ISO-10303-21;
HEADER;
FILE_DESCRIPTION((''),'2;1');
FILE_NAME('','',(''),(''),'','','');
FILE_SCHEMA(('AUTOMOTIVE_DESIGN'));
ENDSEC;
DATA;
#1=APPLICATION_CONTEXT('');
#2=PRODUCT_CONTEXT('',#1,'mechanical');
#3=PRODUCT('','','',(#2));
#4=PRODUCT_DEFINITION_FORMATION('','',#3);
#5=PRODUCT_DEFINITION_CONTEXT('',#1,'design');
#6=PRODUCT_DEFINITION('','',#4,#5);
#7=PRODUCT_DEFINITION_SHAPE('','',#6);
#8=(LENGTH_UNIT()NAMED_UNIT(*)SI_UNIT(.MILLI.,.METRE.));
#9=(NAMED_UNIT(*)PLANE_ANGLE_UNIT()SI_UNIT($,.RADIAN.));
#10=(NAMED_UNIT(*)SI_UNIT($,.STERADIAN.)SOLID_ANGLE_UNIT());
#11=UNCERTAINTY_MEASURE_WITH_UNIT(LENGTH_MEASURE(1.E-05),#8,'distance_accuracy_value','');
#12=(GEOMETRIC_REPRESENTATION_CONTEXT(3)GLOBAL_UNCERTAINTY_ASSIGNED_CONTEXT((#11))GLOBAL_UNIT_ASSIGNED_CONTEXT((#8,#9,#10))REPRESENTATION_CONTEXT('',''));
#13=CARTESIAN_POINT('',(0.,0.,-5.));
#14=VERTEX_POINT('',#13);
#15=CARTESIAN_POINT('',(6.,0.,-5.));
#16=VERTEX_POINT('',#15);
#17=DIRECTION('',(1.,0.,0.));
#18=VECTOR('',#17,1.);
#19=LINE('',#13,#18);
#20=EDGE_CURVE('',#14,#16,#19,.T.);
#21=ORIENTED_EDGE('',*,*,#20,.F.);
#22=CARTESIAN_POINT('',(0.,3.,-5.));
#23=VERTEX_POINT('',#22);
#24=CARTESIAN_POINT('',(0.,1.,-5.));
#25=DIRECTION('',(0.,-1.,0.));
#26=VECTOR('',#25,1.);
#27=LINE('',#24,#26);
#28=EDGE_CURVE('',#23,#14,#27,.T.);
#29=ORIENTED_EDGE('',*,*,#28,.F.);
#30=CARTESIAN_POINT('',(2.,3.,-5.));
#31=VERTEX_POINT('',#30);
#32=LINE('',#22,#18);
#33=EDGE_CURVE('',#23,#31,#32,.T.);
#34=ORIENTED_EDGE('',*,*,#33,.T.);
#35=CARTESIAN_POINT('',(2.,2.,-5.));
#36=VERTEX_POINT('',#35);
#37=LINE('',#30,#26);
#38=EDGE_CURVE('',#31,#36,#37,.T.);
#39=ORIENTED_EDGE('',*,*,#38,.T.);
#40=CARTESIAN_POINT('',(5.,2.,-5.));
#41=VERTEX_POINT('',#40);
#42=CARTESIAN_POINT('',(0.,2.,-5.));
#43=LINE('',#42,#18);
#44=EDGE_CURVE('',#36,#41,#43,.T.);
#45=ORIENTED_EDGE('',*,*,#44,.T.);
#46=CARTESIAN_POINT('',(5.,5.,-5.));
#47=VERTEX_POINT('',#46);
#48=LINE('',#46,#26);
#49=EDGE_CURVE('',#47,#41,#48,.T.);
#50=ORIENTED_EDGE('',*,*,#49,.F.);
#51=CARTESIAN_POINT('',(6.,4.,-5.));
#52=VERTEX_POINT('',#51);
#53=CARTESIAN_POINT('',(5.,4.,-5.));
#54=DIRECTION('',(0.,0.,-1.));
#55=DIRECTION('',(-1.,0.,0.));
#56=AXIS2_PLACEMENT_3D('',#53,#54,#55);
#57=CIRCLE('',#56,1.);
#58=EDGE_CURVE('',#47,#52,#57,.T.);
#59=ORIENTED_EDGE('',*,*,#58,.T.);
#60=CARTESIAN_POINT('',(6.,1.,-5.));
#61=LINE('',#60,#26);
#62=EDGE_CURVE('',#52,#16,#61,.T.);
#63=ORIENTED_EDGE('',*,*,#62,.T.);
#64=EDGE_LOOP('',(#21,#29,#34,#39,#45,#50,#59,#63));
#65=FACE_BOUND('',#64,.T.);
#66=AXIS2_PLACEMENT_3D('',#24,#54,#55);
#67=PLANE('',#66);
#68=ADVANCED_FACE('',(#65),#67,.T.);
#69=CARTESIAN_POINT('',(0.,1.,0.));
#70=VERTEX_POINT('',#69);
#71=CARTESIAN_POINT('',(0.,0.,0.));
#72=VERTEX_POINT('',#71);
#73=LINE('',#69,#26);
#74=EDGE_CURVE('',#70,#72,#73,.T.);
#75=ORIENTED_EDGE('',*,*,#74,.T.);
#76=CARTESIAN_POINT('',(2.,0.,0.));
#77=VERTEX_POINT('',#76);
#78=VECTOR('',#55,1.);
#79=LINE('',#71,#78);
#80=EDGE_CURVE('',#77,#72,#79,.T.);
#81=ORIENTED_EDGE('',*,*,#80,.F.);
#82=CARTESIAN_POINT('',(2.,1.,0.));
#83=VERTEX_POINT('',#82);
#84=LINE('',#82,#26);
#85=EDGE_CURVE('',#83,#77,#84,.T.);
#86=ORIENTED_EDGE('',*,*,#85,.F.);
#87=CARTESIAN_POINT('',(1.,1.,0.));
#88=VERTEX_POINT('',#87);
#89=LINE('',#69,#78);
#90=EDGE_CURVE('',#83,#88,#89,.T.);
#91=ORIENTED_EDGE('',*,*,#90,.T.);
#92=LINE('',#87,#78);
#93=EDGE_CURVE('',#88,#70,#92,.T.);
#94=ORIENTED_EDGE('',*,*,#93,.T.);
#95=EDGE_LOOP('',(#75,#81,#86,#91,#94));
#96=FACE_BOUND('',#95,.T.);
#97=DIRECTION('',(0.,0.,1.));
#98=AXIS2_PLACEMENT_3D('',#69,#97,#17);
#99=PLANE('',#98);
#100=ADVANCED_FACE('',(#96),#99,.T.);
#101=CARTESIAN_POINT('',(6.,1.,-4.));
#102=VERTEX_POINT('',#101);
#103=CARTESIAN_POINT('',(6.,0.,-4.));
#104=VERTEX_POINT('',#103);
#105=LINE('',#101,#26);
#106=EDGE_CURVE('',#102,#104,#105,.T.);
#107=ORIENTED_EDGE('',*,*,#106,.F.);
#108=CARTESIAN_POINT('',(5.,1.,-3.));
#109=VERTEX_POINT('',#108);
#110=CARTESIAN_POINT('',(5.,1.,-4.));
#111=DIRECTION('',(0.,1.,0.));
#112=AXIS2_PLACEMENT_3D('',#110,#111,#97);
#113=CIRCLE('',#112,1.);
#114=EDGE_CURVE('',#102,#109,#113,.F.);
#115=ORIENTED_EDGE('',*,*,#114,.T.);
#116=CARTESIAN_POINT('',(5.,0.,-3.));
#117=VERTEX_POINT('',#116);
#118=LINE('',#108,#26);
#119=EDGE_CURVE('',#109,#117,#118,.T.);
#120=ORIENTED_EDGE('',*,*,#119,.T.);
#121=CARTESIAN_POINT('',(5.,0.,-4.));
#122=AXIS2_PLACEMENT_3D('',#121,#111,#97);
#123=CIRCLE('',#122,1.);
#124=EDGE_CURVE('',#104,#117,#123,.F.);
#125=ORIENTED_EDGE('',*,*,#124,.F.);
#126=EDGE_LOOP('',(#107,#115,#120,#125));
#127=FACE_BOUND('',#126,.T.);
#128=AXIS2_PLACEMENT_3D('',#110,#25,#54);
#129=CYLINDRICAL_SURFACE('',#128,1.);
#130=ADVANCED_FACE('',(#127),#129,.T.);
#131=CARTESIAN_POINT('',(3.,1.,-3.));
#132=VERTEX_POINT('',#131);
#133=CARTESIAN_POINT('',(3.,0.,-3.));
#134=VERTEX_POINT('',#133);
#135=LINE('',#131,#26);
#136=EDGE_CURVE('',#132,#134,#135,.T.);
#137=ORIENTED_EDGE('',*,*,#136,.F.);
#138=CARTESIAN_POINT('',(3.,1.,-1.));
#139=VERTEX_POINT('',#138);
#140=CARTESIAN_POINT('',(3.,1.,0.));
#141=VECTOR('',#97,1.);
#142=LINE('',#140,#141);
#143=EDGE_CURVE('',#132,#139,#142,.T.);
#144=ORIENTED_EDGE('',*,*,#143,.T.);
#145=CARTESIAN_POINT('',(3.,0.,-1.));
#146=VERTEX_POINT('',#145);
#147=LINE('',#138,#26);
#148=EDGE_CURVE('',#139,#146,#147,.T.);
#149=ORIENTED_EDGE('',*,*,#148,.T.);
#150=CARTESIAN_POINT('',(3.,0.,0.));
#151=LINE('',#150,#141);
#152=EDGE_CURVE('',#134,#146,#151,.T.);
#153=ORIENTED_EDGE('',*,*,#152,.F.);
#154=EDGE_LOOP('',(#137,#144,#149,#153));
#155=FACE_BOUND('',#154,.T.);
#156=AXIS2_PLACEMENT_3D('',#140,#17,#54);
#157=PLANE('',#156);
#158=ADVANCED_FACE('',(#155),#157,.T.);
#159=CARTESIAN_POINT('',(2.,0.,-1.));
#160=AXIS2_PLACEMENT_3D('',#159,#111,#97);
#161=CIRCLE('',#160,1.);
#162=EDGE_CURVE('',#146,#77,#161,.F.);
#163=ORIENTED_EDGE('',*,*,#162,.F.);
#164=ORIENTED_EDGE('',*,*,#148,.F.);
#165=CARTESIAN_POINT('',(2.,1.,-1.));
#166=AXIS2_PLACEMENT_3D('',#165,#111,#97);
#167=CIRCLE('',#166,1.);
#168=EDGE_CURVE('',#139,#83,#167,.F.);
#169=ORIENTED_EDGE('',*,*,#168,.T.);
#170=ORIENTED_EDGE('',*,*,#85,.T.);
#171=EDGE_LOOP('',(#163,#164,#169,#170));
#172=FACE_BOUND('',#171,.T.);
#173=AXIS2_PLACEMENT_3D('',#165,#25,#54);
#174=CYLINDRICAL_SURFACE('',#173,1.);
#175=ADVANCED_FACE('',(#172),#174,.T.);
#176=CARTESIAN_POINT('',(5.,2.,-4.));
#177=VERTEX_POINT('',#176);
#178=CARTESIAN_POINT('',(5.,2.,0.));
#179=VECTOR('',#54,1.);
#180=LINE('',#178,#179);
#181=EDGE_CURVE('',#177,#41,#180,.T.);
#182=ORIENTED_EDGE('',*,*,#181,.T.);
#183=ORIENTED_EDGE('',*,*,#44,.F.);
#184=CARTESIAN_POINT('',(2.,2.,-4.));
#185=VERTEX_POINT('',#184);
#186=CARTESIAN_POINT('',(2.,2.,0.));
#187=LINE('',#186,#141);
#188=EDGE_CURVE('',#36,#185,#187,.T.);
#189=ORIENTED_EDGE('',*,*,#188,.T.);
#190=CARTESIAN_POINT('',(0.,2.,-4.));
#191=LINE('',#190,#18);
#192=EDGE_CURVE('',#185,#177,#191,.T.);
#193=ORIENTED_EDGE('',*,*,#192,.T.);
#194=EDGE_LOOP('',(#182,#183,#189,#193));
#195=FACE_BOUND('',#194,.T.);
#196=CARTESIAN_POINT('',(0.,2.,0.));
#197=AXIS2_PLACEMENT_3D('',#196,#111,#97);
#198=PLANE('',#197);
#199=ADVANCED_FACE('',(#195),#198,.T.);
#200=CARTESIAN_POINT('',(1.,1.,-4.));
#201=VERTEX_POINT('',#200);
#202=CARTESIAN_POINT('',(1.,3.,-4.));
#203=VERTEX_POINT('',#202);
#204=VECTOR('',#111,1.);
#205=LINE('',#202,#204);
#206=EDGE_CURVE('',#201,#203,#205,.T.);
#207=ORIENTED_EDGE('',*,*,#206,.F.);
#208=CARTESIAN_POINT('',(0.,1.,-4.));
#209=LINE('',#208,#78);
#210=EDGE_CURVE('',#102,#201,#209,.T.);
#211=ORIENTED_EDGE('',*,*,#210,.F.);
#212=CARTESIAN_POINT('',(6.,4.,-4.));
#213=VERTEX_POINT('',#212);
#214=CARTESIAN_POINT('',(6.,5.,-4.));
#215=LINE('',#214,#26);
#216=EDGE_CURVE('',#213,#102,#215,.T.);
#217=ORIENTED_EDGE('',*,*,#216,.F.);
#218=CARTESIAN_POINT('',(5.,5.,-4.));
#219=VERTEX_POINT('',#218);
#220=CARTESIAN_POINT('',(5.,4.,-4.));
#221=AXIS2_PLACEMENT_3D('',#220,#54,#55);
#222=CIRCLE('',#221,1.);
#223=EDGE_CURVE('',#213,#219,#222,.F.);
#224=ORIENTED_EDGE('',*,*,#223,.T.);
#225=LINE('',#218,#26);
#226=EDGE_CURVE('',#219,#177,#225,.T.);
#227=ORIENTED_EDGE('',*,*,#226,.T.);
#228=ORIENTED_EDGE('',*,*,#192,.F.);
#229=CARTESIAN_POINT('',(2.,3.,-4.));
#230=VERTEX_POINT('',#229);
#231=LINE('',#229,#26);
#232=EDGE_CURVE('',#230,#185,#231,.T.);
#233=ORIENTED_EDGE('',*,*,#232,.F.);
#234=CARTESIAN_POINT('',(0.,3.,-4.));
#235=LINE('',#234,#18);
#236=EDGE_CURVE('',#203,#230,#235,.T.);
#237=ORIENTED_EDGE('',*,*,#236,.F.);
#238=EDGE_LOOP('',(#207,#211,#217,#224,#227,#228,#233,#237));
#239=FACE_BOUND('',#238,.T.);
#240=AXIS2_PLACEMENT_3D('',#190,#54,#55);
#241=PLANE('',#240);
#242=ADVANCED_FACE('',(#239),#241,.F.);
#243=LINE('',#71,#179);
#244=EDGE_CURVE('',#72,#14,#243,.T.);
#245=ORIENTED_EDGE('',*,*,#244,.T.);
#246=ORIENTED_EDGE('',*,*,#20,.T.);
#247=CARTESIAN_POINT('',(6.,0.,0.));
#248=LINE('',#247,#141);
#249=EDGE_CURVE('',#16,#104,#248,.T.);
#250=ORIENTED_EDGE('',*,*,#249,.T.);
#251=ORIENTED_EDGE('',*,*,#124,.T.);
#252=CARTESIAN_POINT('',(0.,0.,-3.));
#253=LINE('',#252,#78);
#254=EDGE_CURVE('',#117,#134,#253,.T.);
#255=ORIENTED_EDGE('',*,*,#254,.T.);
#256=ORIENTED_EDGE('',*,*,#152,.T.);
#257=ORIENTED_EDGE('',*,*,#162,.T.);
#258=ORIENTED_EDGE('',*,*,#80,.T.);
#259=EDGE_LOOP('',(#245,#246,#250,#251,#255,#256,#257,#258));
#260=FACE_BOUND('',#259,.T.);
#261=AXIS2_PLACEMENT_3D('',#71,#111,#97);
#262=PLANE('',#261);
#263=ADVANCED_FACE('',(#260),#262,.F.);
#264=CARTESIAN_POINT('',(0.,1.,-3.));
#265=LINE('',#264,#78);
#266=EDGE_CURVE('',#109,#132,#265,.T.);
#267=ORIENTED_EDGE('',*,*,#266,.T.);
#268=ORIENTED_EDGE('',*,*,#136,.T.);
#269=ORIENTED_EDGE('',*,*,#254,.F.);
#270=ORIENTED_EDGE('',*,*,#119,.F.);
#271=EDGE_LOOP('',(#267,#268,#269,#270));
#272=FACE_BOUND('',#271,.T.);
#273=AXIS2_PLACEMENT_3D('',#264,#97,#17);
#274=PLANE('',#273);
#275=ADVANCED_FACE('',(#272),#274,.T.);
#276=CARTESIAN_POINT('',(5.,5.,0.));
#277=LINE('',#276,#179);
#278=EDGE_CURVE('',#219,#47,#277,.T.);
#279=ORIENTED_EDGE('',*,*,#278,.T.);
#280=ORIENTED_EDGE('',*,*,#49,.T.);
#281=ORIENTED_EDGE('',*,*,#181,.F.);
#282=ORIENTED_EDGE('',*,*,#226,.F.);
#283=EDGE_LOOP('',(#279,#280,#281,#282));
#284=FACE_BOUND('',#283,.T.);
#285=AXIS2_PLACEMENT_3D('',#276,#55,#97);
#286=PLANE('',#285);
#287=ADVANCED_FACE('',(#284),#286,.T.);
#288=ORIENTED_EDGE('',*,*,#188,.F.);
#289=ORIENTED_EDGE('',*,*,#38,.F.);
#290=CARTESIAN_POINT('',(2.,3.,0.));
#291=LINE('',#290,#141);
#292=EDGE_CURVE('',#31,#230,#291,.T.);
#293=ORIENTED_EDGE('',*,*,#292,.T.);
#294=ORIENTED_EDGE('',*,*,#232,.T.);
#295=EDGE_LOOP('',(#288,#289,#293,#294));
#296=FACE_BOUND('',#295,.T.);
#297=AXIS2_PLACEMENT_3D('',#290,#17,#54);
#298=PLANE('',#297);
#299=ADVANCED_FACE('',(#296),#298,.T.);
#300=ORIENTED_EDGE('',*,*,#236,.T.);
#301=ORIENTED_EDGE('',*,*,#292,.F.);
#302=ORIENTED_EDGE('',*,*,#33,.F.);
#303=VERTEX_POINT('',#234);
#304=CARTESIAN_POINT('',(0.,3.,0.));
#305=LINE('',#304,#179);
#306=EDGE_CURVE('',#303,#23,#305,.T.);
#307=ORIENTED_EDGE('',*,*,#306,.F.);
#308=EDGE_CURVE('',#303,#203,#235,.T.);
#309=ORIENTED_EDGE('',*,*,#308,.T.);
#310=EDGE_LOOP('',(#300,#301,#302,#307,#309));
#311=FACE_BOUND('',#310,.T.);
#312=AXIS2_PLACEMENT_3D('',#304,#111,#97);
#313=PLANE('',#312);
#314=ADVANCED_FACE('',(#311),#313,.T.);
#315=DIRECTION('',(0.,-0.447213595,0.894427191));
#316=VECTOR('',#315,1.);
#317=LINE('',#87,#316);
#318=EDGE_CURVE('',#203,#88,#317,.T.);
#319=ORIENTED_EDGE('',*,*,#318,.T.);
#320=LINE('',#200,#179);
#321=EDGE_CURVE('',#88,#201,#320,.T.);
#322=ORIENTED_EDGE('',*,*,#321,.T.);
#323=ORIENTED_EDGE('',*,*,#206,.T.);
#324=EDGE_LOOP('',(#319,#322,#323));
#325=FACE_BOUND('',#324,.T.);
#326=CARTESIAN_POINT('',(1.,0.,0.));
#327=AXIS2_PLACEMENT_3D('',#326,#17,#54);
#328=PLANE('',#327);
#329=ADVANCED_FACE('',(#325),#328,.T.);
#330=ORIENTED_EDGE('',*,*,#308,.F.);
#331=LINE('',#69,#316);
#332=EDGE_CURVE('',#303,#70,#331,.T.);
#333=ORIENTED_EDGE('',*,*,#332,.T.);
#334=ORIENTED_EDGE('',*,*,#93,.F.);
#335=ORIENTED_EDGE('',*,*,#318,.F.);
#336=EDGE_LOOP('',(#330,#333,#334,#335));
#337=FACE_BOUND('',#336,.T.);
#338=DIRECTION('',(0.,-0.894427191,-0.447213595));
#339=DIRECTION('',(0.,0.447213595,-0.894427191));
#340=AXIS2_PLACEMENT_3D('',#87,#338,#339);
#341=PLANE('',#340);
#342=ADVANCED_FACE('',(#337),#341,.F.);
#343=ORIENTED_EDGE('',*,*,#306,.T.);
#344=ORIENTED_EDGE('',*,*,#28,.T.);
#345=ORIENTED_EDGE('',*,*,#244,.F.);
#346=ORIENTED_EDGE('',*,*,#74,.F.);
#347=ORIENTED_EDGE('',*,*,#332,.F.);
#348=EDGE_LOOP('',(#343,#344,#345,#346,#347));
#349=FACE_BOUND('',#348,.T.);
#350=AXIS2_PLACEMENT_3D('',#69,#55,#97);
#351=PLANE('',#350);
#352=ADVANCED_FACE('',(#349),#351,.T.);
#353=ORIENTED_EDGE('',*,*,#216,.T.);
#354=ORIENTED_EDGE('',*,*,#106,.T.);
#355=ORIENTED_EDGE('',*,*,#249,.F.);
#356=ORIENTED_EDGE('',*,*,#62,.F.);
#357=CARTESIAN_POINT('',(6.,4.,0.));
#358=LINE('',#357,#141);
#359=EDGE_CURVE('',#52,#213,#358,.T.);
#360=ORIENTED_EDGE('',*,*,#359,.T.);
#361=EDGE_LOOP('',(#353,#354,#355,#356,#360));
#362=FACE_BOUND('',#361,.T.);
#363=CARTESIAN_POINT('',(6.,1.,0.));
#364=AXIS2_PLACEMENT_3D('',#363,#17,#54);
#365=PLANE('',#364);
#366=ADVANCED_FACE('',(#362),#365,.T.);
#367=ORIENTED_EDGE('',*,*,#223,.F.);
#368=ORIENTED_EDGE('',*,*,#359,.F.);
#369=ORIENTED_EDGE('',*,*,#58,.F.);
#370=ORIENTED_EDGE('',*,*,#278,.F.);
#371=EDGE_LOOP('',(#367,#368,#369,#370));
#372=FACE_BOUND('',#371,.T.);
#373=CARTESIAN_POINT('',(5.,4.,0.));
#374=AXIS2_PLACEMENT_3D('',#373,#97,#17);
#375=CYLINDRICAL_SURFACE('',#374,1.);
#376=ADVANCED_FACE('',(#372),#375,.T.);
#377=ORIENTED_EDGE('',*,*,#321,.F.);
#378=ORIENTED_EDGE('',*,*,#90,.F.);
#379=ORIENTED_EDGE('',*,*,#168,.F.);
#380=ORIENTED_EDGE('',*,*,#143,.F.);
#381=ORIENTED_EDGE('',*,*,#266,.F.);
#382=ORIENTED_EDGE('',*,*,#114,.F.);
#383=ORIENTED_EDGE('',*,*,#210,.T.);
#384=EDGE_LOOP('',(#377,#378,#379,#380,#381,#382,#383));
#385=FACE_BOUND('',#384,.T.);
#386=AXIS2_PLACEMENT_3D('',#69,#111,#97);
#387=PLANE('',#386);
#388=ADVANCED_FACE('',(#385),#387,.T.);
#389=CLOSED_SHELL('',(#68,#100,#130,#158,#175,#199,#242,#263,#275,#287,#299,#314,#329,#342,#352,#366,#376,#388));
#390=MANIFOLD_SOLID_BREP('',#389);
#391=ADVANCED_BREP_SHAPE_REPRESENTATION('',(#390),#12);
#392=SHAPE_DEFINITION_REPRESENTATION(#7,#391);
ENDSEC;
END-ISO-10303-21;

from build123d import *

# Parameters (mm, degrees)
SKETCH_1_W      = 2
SKETCH_1_H      = 1
SKETCH_1_W_2    = 3
SKETCH_1_W_3    = 1
EXTRUDE_1_DEPTH = 1
SKETCH_1_3_W    = 3
SKETCH_1_3_H    = 1
EXTRUDE_2_DEPTH = 2
SKETCH_1_4_W    = 2
SKETCH_1_4_H    = 1
EXTRUDE_3_DEPTH = 3
SKETCH_1_5_W    = 1
SKETCH_1_5_H    = 1
EXTRUDE_4_DEPTH = 5
FILLET_1_R      = 1
EXTRUDE_5_DEPTH = 1


with BuildPart() as part:
    # 草圖1 → 填料-伸長1 (new body)
    with BuildSketch(Plane(origin=(0, 0, 0), x_dir=(1, 0, 0), z_dir=(0, 1, 0))):
        with Locations((1, 4.5)):
            Rectangle(SKETCH_1_W, SKETCH_1_H)
        with BuildLine():
            Line((0, 4), (0, 0))
            Line((0, 0), (2, 0))
            ThreePointArc((2, 0), (2.707106781, 0.292893219), (3, 1))
            Line((3, 1), (3, 3))
            Line((3, 3), (5, 3))
            ThreePointArc((5, 3), (5.707106781, 3.292893219), (6, 4))
            Line((6, 4), (5, 4))
            Line((5, 4), (2, 4))
            Line((2, 4), (0, 4))
        make_face()
        with Locations((3.5, 4.5)):
            Rectangle(SKETCH_1_W_2, SKETCH_1_H)
        with Locations((5.5, 4.5)):
            Rectangle(SKETCH_1_W_3, SKETCH_1_H)
    extrude(amount=EXTRUDE_1_DEPTH)

    # 草圖1<3> → 填料-伸長2 (add)
    with BuildSketch(Plane(origin=(0, 0, 0), x_dir=(1, 0, 0), z_dir=(0, 1, 0))):
        with Locations((3.5, 4.5)):
            Rectangle(SKETCH_1_3_W, SKETCH_1_3_H)
    extrude(amount=EXTRUDE_2_DEPTH)

    # 草圖1<4> → 填料-伸長3 (add)
    with BuildSketch(Plane(origin=(0, 0, 0), x_dir=(1, 0, 0), z_dir=(0, 1, 0))):
        with Locations((1, 4.5)):
            Rectangle(SKETCH_1_4_W, SKETCH_1_4_H)
    extrude(amount=EXTRUDE_3_DEPTH)

    # 草圖1<5> → 填料-伸長4 (add)
    with BuildSketch(Plane(origin=(0, 0, 0), x_dir=(1, 0, 0), z_dir=(0, 1, 0))):
        with Locations((5.5, 4.5)):
            Rectangle(SKETCH_1_5_W, SKETCH_1_5_H)
    extrude(amount=EXTRUDE_4_DEPTH)

    # 圓角1
    fillet_1_edges = [part.edges().sort_by_distance(p)[0] for p in [
        (6, 5, -4.5),
    ]]
    fillet(fillet_1_edges, radius=FILLET_1_R - 0.0001)  # a hair under: the kernel refuses the full size

    # 草圖2 → 填料-伸長5 (add)
    with BuildSketch(Plane(origin=(0, 0, 0), x_dir=(0, 0, -1), z_dir=(1, 0, 0))):
        Polygon((0, 1), (4, 3), (4, 1), align=None)
    extrude(amount=EXTRUDE_5_DEPTH)


solid = part.part
